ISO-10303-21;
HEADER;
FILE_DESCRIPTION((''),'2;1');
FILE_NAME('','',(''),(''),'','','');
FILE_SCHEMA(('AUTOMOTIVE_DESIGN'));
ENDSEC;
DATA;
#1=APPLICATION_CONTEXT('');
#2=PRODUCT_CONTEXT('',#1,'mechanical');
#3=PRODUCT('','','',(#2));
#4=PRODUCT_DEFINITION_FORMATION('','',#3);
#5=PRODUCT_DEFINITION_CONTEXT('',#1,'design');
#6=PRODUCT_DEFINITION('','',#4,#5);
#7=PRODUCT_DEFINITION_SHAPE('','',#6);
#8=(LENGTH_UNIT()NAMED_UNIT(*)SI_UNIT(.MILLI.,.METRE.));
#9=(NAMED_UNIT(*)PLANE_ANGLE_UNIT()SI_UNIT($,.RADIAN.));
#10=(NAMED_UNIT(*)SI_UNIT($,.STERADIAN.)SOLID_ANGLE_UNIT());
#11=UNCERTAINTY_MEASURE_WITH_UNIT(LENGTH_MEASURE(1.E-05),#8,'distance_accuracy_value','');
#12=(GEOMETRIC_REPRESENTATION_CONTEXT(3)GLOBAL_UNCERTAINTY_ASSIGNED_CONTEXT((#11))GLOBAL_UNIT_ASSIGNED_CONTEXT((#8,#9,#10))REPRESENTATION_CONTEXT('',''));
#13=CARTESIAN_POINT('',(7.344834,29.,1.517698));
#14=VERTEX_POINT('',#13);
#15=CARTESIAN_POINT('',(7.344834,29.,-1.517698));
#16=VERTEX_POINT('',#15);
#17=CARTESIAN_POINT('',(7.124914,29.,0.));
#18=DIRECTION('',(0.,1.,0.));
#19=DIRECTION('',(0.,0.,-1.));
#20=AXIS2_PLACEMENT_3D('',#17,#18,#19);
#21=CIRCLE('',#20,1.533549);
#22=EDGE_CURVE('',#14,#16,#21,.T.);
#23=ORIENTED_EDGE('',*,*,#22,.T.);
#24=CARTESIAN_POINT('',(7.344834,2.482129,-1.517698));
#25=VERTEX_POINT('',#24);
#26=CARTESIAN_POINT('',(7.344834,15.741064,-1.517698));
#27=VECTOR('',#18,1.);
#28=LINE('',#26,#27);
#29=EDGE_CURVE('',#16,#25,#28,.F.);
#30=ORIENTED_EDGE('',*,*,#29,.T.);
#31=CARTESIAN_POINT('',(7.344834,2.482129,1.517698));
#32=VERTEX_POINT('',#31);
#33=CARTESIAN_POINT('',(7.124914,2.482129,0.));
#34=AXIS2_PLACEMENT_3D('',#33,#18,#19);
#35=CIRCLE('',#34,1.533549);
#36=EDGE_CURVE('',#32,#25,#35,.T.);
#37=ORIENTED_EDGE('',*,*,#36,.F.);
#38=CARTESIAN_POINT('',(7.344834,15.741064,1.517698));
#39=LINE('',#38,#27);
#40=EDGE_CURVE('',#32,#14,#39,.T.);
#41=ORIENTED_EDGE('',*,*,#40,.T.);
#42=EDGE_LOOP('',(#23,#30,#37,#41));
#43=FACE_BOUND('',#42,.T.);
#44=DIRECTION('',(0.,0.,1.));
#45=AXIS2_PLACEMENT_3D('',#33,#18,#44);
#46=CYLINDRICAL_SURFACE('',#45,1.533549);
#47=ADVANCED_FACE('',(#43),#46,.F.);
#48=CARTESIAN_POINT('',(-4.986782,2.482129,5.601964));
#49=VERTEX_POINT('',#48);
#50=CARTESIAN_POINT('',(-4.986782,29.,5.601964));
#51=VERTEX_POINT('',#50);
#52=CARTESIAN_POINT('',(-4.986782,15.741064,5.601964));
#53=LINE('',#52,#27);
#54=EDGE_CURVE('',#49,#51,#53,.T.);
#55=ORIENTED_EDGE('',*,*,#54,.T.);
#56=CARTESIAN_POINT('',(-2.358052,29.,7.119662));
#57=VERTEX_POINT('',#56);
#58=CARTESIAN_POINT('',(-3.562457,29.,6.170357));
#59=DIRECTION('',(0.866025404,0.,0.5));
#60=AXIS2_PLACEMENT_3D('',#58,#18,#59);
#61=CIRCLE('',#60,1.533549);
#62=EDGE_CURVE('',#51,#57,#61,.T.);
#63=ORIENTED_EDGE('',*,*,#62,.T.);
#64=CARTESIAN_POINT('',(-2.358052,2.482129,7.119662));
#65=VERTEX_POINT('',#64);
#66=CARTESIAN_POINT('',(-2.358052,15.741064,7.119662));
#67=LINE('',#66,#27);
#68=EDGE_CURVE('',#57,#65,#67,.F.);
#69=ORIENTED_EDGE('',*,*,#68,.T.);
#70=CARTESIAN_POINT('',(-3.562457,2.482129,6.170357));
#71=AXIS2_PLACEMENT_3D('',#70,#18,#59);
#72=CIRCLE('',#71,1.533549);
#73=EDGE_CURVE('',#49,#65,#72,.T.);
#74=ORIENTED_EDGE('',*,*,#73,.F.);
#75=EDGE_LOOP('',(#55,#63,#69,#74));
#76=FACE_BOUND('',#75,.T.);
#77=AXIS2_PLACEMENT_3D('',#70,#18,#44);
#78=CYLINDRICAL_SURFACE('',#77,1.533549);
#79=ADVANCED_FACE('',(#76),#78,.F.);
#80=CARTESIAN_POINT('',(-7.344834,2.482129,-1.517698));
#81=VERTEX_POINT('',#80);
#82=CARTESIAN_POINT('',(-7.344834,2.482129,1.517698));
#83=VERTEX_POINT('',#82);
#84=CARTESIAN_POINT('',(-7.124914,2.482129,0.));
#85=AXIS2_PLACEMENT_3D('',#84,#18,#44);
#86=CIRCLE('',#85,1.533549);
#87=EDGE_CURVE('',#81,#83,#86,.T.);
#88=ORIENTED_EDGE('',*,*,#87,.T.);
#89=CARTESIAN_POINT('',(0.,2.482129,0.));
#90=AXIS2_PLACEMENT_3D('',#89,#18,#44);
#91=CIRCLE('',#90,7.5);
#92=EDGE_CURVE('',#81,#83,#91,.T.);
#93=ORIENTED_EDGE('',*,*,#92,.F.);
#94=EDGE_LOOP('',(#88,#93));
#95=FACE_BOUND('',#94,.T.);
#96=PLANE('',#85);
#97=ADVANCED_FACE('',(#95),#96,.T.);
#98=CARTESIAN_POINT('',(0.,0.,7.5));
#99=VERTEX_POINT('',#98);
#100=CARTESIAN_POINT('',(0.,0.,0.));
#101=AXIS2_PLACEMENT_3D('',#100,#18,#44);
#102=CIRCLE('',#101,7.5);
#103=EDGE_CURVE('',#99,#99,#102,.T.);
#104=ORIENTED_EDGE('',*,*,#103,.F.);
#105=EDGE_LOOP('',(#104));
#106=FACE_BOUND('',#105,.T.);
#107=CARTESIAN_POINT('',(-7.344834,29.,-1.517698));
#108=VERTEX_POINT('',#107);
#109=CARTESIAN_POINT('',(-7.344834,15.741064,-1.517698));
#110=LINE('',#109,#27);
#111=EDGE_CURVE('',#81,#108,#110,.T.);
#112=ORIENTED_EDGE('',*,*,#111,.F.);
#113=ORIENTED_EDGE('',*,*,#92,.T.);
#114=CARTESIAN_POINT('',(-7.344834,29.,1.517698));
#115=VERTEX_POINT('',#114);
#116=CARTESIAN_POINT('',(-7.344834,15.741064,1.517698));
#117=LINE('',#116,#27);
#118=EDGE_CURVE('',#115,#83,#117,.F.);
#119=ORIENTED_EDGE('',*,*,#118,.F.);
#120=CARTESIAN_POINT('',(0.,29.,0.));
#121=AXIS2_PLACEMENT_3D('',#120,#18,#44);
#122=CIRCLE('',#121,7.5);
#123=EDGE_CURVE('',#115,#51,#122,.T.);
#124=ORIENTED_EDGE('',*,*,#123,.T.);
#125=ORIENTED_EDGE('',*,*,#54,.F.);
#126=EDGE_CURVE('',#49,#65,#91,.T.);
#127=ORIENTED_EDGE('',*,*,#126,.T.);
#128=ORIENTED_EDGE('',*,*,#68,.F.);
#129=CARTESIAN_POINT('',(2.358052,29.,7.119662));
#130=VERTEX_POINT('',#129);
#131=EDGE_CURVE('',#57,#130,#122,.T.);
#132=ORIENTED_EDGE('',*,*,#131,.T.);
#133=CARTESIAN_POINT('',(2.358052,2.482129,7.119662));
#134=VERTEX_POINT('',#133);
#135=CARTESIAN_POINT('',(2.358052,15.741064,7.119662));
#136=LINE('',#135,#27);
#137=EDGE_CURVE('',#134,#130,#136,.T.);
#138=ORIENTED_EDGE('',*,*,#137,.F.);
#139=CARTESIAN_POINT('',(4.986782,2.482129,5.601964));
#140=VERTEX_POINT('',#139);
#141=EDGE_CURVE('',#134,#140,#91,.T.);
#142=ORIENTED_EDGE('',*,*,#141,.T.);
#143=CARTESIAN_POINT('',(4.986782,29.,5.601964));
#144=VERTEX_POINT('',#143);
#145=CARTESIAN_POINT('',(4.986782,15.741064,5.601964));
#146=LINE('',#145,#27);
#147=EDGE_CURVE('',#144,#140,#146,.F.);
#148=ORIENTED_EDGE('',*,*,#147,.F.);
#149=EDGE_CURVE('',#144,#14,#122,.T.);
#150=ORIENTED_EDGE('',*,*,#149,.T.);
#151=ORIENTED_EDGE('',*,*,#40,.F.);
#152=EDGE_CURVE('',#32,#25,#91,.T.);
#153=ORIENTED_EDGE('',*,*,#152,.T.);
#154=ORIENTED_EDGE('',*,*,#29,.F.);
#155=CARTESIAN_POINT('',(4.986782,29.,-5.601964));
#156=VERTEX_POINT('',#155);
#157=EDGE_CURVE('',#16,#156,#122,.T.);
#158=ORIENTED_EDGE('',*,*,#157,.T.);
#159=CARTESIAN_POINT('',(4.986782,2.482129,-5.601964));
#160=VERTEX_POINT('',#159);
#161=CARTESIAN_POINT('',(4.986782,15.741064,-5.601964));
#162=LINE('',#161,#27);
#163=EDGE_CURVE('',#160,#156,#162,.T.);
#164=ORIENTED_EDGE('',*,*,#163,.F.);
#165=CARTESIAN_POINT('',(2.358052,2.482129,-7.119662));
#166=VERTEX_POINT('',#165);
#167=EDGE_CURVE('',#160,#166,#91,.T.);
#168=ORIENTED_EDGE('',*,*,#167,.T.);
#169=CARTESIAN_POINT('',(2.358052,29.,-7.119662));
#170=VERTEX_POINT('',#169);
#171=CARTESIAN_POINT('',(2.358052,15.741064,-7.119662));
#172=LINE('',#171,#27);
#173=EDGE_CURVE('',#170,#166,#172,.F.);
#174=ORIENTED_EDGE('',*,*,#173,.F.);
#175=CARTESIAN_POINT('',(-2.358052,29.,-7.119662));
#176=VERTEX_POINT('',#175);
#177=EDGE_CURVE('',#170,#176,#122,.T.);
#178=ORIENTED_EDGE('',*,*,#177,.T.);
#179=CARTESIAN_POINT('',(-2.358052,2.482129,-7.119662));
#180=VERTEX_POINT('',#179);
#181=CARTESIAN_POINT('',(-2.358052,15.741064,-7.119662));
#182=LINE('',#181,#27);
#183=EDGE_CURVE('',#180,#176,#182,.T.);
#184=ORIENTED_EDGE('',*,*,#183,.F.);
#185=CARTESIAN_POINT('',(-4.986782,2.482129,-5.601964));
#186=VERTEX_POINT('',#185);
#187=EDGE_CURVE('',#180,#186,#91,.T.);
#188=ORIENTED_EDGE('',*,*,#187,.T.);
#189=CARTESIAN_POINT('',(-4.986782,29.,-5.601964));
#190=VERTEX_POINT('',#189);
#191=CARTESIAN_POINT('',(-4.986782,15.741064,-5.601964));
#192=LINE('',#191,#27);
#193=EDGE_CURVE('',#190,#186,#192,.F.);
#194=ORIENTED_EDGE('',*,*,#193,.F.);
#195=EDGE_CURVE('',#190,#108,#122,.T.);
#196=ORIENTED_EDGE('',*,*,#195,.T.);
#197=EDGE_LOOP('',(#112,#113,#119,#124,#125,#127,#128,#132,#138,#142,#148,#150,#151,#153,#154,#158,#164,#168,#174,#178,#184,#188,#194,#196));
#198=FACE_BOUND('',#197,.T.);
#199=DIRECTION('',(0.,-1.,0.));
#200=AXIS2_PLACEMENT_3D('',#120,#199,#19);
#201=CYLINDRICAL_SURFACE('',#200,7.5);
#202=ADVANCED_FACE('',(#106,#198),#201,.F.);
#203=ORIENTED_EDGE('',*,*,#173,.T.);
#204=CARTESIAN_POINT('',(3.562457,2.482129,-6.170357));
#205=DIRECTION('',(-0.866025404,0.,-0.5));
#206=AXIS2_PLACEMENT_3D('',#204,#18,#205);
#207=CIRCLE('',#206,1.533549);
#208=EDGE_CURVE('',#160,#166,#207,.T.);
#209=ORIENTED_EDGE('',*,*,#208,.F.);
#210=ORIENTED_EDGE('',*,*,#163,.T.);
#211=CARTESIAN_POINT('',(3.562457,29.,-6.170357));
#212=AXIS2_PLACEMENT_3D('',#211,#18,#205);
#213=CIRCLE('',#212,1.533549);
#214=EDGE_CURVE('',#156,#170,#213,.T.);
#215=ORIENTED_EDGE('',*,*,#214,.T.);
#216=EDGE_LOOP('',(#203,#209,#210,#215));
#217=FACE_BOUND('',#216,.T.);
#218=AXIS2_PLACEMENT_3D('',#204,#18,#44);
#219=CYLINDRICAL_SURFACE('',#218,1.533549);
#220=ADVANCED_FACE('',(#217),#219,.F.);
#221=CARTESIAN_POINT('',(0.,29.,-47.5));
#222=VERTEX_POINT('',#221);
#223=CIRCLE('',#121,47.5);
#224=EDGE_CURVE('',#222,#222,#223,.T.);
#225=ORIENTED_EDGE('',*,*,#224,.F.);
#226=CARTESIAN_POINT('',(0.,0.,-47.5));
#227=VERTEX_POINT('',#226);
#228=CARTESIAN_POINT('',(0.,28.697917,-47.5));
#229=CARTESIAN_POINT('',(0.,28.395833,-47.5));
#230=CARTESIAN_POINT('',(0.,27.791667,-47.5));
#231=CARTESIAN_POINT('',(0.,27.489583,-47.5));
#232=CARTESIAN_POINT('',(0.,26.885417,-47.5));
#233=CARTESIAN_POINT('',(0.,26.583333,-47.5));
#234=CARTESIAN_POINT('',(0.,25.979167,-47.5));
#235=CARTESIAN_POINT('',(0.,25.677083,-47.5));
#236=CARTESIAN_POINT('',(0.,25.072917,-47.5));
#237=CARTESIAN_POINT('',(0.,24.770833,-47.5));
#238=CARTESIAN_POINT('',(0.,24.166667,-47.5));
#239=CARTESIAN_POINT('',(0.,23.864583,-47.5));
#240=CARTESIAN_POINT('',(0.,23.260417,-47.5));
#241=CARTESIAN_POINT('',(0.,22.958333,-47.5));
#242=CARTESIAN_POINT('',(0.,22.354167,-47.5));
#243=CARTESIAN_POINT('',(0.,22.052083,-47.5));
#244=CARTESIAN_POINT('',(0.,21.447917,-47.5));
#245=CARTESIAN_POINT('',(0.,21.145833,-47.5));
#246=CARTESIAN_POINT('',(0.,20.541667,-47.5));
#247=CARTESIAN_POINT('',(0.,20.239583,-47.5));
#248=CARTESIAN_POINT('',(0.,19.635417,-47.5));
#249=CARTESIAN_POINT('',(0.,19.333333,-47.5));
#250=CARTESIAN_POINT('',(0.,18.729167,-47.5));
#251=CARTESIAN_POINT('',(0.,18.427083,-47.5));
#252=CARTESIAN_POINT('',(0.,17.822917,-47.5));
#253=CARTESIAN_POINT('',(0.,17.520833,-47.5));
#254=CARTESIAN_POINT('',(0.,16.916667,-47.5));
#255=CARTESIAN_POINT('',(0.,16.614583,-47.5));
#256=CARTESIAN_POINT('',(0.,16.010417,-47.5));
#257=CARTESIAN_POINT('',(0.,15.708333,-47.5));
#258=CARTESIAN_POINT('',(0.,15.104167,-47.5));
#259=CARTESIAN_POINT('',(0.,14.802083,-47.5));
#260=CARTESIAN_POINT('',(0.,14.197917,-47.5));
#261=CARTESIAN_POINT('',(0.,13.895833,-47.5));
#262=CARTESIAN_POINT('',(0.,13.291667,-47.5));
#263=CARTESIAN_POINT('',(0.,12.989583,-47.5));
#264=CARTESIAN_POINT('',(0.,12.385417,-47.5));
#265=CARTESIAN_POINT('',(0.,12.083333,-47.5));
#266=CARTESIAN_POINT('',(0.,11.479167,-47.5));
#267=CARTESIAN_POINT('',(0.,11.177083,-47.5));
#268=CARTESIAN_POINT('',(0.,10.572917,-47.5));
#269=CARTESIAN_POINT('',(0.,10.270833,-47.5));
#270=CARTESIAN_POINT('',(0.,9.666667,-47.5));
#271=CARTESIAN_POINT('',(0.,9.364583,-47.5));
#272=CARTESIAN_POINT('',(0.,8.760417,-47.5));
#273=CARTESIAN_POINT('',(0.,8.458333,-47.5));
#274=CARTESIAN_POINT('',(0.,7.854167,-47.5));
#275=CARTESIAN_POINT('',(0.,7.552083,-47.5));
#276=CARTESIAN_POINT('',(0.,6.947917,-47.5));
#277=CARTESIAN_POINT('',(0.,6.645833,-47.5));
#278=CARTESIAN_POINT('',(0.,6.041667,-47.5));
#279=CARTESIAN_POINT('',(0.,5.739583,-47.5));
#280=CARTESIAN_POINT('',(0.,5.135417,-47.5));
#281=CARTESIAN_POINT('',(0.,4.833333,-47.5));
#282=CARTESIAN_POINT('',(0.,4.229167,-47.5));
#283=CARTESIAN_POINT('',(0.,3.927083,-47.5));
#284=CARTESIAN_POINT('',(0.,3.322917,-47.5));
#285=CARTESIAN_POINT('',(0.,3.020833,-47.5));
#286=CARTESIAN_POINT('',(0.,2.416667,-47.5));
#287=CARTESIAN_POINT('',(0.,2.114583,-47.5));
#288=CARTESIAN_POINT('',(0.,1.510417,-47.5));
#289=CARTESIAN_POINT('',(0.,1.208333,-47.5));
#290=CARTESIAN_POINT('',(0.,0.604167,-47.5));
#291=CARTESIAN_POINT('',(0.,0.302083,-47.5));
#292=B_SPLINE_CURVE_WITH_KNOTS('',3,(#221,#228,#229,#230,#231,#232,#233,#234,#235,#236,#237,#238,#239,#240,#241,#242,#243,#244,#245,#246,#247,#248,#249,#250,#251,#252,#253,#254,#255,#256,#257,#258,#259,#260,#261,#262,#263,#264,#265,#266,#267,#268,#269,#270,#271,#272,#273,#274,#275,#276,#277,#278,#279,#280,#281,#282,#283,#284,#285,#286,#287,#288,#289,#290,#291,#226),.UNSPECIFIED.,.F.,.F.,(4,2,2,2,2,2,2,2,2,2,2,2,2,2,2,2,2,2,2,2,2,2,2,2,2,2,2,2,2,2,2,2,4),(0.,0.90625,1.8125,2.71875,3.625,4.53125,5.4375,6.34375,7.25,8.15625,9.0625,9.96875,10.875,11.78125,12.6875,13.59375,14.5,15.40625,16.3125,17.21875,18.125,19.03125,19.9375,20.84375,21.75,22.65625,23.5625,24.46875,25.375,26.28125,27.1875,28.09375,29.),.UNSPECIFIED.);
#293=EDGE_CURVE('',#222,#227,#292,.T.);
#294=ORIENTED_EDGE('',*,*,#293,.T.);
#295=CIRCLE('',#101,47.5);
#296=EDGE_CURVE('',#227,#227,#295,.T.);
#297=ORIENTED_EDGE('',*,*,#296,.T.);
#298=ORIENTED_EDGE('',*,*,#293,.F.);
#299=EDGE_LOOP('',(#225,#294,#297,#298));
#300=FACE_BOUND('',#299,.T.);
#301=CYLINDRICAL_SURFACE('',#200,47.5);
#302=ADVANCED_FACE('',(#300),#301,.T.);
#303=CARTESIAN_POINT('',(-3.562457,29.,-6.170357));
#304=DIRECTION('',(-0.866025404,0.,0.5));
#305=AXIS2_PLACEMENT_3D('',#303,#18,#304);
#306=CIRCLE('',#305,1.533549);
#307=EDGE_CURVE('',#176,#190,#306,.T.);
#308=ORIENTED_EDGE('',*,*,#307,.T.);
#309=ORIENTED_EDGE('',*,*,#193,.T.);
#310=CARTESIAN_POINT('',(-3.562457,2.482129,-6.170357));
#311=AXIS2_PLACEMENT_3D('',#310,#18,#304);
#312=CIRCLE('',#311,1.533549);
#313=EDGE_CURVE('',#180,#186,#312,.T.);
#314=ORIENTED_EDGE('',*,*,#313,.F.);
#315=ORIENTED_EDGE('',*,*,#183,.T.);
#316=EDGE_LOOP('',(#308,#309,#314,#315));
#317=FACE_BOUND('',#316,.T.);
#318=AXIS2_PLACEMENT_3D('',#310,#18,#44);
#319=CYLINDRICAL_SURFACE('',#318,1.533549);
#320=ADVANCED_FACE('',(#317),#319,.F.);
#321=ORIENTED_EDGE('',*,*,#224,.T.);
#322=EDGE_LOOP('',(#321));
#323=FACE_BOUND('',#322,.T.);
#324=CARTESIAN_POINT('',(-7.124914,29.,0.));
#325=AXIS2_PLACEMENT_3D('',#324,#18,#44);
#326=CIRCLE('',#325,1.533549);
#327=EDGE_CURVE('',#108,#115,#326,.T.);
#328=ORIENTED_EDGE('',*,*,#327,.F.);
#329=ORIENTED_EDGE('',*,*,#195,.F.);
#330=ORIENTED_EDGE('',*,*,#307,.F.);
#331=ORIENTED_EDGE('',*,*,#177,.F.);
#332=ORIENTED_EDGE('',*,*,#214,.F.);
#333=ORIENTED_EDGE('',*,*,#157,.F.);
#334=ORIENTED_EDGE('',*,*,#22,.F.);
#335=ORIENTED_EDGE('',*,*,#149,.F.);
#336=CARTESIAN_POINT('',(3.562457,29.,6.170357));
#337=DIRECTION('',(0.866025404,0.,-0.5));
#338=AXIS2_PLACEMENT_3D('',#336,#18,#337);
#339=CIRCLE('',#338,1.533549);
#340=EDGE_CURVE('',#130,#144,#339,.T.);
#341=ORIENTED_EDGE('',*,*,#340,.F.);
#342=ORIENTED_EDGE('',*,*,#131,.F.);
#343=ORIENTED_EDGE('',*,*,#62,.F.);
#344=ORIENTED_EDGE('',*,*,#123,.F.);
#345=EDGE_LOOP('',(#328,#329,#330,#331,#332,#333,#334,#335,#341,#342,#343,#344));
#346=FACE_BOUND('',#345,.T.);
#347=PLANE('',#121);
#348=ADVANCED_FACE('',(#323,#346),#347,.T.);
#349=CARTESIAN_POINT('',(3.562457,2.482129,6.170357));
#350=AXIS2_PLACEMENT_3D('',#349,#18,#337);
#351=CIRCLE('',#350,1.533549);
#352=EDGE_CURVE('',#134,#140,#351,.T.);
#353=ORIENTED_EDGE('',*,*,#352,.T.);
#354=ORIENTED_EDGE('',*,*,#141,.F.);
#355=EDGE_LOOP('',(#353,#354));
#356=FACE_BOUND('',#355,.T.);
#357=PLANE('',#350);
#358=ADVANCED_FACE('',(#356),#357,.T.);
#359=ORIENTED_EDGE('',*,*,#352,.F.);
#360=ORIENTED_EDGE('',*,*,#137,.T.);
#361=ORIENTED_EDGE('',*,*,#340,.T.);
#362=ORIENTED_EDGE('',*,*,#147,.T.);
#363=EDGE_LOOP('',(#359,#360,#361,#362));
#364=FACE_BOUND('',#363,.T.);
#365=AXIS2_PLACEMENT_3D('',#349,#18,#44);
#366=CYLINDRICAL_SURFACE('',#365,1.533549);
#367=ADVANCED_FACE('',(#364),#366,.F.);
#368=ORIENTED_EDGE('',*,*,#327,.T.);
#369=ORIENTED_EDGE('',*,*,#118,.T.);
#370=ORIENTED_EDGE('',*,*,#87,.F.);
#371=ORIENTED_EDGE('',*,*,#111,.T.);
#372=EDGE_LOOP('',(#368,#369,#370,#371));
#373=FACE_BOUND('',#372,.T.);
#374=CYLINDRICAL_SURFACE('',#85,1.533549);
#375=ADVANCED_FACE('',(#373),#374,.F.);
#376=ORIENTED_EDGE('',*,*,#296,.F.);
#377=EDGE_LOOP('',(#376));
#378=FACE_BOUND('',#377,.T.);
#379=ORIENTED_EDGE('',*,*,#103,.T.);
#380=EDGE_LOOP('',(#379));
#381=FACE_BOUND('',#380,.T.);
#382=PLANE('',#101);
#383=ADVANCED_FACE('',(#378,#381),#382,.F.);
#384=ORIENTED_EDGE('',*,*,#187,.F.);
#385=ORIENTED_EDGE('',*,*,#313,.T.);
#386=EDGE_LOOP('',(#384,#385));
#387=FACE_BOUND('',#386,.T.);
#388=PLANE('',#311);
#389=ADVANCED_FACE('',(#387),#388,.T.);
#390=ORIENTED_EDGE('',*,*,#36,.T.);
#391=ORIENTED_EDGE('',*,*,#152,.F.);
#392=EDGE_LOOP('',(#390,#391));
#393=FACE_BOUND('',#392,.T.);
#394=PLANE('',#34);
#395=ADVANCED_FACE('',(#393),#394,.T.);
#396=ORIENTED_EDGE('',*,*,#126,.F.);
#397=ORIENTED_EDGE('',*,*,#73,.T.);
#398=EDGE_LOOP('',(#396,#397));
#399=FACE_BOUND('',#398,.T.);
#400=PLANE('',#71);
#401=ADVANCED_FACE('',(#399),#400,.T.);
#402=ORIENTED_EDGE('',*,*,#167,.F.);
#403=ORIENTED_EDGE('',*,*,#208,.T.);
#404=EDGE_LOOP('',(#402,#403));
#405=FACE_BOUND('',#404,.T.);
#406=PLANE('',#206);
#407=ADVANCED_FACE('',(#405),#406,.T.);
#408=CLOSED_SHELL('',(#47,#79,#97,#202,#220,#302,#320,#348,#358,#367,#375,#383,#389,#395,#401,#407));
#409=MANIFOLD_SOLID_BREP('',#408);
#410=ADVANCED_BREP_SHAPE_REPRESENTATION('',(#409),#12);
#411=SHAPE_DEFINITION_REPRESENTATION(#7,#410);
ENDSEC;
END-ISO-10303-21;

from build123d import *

# Parameters (mm, degrees)
SKETCH1_R           = 47.5
BOSS_EXTRUDE1_DEPTH = 29
SKETCH2_R           = 7.5
CUT_EXTRUDE1_DEPTH  = 74.167615787
SKETCH3_R           = 1.533548882
CUT_EXTRUDE2_DEPTH  = 26.517871126
CIRPATTERN1_COUNT   = 6


with BuildPart() as part:
    # Sketch1 → Boss-Extrude1 (new body)
    with BuildSketch(Plane(origin=(0, 0, 0), x_dir=(1, 0, 0), z_dir=(0, 1, 0))):
        Circle(SKETCH1_R)
    extrude(amount=BOSS_EXTRUDE1_DEPTH)

    # Sketch2 → Cut-Extrude1 (cut, through all)
    with BuildSketch(Plane(origin=(0, 0, 0), x_dir=(1, 0, 0), z_dir=(0, 1, 0))):
        Circle(SKETCH2_R)
    extrude(amount=CUT_EXTRUDE1_DEPTH, mode=Mode.SUBTRACT)

    # Sketch3 → Cut-Extrude2 (cut)
    with BuildSketch(Plane(origin=(0, 29, 0), x_dir=(1, 0, 0), z_dir=(0, 1, 0))):
        with Locations((-7.124914208, 0)):
            Circle(SKETCH3_R)
    cut_extrude2 = extrude(amount=-CUT_EXTRUDE2_DEPTH, mode=Mode.SUBTRACT)

    # CirPattern1: Cut-Extrude2 ×6 about axis
    cirpattern1_axis = Axis((0, 0, 0), (0, 1, 0))
    for i in range(1, CIRPATTERN1_COUNT):
        add(cut_extrude2.rotate(cirpattern1_axis, i * 360 / CIRPATTERN1_COUNT), mode=Mode.SUBTRACT)


solid = part.part
